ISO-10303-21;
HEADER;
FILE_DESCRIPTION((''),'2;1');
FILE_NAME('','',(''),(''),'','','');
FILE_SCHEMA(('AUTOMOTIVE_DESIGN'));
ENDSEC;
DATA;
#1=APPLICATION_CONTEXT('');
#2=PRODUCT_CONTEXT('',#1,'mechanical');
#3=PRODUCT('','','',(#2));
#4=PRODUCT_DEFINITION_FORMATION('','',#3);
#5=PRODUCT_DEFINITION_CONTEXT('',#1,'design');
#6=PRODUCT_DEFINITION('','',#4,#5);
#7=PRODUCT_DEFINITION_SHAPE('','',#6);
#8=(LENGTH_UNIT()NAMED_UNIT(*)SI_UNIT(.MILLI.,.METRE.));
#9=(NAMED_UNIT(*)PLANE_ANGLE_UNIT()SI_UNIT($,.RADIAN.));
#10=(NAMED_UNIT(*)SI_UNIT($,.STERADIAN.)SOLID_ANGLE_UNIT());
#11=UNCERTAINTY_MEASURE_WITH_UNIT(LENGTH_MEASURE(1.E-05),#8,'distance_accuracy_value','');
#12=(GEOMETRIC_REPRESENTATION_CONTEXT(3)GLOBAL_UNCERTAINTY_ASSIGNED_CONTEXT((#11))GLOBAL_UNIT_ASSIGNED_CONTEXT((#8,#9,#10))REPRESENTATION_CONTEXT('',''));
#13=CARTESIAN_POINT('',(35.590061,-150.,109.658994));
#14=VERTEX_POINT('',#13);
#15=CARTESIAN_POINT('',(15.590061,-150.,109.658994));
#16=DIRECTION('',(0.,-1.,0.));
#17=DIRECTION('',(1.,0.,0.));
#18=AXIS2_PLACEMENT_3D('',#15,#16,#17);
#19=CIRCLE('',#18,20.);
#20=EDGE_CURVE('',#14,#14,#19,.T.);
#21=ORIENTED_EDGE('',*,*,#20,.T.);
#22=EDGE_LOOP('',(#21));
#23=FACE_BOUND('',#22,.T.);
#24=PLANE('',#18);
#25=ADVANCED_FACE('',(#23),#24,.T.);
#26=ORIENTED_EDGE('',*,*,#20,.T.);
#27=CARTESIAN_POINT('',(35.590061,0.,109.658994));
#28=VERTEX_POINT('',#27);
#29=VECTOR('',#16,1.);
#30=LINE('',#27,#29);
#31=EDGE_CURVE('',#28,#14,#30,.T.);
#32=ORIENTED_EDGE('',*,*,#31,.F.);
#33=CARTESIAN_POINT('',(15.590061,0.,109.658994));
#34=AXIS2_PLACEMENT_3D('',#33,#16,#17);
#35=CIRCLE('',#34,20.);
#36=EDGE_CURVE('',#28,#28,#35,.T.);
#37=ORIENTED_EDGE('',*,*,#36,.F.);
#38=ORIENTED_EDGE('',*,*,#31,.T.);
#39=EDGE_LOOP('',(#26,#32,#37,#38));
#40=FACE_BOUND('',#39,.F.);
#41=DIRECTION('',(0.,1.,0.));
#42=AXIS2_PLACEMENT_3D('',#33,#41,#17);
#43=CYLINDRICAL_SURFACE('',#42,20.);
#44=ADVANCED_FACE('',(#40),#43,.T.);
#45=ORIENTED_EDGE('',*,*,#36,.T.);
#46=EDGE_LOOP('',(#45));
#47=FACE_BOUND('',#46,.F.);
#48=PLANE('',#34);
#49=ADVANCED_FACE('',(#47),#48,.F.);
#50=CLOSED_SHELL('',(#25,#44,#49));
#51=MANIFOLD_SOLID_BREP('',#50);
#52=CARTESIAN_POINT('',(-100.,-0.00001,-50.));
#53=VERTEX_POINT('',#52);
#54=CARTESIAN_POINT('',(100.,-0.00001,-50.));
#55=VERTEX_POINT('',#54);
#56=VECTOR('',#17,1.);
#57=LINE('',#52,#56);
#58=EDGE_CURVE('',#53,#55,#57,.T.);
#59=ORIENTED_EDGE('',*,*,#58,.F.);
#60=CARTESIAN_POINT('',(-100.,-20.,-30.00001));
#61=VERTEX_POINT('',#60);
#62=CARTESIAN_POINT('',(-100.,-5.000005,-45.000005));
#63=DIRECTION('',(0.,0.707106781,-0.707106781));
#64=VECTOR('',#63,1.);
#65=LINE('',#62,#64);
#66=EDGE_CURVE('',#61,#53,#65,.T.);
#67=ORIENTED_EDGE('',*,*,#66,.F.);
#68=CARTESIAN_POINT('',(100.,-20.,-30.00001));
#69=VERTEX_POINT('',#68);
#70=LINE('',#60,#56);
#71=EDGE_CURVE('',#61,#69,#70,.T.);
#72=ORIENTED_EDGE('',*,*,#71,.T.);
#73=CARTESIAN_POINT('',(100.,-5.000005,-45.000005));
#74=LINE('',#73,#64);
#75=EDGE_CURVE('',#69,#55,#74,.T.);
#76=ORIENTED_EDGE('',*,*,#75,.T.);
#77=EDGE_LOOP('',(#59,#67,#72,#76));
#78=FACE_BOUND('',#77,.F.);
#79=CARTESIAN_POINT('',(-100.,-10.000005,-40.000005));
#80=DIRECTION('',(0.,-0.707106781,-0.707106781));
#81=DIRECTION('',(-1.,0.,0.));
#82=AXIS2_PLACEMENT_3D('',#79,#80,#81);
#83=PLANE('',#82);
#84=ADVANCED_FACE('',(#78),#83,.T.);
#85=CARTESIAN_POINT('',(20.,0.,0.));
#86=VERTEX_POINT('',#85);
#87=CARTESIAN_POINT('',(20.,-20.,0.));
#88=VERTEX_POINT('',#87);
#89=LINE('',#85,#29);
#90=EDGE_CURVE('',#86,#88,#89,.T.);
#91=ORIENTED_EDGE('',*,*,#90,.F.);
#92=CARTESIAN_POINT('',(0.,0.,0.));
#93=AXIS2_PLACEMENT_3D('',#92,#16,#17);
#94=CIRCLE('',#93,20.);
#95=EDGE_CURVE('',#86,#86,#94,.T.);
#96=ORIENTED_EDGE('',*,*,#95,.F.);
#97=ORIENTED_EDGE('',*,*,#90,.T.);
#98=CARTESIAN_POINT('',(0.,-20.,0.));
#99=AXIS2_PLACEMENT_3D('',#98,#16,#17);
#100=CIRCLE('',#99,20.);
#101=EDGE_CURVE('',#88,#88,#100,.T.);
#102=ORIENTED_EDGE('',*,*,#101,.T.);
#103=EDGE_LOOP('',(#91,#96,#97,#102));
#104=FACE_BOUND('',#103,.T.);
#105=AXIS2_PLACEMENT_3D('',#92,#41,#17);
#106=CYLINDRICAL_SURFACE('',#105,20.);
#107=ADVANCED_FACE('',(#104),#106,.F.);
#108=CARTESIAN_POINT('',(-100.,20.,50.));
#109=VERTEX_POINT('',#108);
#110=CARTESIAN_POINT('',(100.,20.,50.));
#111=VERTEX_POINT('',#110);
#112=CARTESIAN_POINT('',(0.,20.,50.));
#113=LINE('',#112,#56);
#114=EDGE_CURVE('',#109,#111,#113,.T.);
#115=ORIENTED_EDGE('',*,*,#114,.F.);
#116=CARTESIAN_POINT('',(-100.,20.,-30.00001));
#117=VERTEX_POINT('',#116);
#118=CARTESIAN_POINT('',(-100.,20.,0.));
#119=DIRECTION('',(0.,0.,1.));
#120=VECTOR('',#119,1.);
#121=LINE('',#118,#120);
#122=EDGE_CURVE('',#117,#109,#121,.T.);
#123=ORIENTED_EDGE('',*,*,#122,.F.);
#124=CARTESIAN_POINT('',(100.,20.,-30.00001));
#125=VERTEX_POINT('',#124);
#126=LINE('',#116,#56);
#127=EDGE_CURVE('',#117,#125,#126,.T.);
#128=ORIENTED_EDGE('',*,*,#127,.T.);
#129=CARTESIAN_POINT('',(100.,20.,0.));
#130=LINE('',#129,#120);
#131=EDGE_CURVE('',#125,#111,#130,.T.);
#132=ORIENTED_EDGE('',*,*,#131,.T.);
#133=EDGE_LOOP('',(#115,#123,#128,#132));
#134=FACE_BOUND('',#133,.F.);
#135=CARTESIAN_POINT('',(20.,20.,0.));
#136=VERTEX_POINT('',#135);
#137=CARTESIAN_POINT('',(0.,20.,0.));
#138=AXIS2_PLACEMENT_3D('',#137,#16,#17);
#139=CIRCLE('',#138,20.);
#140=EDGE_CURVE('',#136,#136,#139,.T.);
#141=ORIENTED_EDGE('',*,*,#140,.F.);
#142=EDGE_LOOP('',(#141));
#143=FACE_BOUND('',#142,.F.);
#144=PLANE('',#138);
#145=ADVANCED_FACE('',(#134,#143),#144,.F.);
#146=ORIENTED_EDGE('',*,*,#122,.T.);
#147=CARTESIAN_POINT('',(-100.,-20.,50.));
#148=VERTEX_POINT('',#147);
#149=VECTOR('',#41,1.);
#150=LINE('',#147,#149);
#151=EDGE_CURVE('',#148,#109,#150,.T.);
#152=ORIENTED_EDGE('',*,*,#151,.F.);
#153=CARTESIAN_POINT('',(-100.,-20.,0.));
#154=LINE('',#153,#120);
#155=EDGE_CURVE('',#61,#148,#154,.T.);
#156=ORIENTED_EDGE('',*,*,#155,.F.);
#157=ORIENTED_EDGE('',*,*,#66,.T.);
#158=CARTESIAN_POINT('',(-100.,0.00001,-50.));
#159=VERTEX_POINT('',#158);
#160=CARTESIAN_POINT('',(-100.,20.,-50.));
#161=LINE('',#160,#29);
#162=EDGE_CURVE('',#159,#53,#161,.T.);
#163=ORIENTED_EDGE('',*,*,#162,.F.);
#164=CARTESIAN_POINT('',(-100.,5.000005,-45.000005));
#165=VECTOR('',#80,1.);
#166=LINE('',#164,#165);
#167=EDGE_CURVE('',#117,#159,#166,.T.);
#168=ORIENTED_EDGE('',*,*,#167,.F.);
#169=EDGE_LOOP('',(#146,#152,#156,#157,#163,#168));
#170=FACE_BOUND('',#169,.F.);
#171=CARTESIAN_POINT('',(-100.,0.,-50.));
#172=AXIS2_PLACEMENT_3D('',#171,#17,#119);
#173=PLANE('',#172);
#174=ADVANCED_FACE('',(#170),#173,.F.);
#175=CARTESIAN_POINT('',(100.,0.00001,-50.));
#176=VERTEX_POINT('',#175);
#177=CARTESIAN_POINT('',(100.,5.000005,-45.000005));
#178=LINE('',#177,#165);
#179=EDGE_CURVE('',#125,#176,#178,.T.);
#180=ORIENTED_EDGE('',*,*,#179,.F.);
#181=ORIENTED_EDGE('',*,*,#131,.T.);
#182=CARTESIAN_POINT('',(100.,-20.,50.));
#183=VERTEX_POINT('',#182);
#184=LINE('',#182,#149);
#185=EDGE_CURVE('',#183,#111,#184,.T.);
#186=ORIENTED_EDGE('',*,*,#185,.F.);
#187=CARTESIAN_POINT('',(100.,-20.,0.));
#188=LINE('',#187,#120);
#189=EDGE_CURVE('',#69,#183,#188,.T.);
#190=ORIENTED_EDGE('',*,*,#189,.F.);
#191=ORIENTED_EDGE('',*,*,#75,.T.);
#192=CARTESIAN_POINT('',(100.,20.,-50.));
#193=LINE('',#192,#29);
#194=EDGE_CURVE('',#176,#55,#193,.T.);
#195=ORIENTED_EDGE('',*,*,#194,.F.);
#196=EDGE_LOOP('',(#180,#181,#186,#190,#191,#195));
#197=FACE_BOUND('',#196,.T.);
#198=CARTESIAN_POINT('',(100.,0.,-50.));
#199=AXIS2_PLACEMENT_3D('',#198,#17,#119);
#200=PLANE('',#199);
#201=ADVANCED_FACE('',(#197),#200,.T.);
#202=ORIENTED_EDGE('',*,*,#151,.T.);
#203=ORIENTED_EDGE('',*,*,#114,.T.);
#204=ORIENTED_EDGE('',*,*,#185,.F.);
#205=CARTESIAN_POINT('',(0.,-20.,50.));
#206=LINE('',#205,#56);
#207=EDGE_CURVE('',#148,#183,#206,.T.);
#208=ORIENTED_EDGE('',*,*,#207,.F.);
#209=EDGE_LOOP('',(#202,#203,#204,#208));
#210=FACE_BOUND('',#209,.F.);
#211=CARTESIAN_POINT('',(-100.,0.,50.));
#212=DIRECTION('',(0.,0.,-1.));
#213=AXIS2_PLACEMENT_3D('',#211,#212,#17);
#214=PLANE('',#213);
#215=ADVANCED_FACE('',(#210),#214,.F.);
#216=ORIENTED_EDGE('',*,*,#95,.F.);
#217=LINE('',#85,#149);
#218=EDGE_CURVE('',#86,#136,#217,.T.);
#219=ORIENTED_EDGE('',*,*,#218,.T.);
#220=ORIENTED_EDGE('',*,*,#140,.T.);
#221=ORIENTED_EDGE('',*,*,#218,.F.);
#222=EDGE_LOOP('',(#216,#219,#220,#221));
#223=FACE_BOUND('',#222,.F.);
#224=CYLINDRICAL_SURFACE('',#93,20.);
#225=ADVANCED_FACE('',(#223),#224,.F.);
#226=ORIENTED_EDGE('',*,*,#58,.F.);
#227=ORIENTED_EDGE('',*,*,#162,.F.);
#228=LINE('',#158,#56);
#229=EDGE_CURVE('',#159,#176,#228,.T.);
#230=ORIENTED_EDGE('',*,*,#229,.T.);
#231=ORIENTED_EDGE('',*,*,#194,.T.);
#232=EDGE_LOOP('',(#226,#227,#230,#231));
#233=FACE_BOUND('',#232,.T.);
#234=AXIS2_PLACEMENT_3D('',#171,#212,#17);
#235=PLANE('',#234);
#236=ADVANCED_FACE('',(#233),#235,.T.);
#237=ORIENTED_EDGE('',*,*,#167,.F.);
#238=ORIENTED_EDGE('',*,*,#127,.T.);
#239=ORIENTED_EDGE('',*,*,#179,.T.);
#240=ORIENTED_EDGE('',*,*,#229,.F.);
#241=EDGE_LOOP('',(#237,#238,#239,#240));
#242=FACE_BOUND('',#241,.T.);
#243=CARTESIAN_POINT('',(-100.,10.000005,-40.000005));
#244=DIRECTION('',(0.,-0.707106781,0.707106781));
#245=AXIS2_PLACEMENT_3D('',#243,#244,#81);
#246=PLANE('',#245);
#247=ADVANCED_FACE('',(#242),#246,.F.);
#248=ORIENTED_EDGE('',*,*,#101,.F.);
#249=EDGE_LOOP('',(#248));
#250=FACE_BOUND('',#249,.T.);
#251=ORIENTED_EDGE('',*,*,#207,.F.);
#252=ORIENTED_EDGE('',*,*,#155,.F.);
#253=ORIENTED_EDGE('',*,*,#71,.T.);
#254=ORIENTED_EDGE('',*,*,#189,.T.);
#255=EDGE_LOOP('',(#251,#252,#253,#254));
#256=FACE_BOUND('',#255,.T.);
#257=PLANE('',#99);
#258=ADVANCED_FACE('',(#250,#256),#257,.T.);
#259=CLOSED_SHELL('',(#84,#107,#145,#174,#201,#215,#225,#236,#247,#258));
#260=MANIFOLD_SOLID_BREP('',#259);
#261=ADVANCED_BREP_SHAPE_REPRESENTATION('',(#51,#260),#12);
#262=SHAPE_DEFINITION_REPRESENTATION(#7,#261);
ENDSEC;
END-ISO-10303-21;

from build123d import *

# Parameters (mm, degrees)
F0_W          = 200
F0_H          = 100
F0_R          = 20
F1_DEPTH      = 20
F1_DEPTH_BACK = 20
F2_SIZE       = 19.99999
F3_R          = 20
F4_DEPTH      = 150


# Not quite as in the source:
# - a fillet or chamfer is up to 0.001 mm smaller than in the source, because OpenCascade refuses the exact size


with BuildPart() as f1:
    # F0 (on Front) → F1 (new body, two sides)
    with BuildSketch(Plane.XZ) as f1_sk:
        Rectangle(F0_W, F0_H)
        Circle(F0_R, mode=Mode.SUBTRACT)
    extrude(amount=F1_DEPTH)
    extrude(f1_sk.sketch, amount=-F1_DEPTH_BACK)

    # F2 (size 20 in the source; OpenCascade refuses exactly that, so slightly less here)
    f2_edges = [f1.edges().sort_by_distance(p)[0] for p in [
        (0, 20, -50),
        (0, -20, -50),
    ]]
    chamfer(f2_edges, length=F2_SIZE)


with BuildPart() as f4:
    # F3 (on Front) → F4 (new body)
    with BuildSketch(Plane.XZ):
        with Locations((15.5900605023, 109.6589937806)):
            Circle(F3_R)
    extrude(amount=F4_DEPTH)


solid = Compound([f1.part, f4.part])
